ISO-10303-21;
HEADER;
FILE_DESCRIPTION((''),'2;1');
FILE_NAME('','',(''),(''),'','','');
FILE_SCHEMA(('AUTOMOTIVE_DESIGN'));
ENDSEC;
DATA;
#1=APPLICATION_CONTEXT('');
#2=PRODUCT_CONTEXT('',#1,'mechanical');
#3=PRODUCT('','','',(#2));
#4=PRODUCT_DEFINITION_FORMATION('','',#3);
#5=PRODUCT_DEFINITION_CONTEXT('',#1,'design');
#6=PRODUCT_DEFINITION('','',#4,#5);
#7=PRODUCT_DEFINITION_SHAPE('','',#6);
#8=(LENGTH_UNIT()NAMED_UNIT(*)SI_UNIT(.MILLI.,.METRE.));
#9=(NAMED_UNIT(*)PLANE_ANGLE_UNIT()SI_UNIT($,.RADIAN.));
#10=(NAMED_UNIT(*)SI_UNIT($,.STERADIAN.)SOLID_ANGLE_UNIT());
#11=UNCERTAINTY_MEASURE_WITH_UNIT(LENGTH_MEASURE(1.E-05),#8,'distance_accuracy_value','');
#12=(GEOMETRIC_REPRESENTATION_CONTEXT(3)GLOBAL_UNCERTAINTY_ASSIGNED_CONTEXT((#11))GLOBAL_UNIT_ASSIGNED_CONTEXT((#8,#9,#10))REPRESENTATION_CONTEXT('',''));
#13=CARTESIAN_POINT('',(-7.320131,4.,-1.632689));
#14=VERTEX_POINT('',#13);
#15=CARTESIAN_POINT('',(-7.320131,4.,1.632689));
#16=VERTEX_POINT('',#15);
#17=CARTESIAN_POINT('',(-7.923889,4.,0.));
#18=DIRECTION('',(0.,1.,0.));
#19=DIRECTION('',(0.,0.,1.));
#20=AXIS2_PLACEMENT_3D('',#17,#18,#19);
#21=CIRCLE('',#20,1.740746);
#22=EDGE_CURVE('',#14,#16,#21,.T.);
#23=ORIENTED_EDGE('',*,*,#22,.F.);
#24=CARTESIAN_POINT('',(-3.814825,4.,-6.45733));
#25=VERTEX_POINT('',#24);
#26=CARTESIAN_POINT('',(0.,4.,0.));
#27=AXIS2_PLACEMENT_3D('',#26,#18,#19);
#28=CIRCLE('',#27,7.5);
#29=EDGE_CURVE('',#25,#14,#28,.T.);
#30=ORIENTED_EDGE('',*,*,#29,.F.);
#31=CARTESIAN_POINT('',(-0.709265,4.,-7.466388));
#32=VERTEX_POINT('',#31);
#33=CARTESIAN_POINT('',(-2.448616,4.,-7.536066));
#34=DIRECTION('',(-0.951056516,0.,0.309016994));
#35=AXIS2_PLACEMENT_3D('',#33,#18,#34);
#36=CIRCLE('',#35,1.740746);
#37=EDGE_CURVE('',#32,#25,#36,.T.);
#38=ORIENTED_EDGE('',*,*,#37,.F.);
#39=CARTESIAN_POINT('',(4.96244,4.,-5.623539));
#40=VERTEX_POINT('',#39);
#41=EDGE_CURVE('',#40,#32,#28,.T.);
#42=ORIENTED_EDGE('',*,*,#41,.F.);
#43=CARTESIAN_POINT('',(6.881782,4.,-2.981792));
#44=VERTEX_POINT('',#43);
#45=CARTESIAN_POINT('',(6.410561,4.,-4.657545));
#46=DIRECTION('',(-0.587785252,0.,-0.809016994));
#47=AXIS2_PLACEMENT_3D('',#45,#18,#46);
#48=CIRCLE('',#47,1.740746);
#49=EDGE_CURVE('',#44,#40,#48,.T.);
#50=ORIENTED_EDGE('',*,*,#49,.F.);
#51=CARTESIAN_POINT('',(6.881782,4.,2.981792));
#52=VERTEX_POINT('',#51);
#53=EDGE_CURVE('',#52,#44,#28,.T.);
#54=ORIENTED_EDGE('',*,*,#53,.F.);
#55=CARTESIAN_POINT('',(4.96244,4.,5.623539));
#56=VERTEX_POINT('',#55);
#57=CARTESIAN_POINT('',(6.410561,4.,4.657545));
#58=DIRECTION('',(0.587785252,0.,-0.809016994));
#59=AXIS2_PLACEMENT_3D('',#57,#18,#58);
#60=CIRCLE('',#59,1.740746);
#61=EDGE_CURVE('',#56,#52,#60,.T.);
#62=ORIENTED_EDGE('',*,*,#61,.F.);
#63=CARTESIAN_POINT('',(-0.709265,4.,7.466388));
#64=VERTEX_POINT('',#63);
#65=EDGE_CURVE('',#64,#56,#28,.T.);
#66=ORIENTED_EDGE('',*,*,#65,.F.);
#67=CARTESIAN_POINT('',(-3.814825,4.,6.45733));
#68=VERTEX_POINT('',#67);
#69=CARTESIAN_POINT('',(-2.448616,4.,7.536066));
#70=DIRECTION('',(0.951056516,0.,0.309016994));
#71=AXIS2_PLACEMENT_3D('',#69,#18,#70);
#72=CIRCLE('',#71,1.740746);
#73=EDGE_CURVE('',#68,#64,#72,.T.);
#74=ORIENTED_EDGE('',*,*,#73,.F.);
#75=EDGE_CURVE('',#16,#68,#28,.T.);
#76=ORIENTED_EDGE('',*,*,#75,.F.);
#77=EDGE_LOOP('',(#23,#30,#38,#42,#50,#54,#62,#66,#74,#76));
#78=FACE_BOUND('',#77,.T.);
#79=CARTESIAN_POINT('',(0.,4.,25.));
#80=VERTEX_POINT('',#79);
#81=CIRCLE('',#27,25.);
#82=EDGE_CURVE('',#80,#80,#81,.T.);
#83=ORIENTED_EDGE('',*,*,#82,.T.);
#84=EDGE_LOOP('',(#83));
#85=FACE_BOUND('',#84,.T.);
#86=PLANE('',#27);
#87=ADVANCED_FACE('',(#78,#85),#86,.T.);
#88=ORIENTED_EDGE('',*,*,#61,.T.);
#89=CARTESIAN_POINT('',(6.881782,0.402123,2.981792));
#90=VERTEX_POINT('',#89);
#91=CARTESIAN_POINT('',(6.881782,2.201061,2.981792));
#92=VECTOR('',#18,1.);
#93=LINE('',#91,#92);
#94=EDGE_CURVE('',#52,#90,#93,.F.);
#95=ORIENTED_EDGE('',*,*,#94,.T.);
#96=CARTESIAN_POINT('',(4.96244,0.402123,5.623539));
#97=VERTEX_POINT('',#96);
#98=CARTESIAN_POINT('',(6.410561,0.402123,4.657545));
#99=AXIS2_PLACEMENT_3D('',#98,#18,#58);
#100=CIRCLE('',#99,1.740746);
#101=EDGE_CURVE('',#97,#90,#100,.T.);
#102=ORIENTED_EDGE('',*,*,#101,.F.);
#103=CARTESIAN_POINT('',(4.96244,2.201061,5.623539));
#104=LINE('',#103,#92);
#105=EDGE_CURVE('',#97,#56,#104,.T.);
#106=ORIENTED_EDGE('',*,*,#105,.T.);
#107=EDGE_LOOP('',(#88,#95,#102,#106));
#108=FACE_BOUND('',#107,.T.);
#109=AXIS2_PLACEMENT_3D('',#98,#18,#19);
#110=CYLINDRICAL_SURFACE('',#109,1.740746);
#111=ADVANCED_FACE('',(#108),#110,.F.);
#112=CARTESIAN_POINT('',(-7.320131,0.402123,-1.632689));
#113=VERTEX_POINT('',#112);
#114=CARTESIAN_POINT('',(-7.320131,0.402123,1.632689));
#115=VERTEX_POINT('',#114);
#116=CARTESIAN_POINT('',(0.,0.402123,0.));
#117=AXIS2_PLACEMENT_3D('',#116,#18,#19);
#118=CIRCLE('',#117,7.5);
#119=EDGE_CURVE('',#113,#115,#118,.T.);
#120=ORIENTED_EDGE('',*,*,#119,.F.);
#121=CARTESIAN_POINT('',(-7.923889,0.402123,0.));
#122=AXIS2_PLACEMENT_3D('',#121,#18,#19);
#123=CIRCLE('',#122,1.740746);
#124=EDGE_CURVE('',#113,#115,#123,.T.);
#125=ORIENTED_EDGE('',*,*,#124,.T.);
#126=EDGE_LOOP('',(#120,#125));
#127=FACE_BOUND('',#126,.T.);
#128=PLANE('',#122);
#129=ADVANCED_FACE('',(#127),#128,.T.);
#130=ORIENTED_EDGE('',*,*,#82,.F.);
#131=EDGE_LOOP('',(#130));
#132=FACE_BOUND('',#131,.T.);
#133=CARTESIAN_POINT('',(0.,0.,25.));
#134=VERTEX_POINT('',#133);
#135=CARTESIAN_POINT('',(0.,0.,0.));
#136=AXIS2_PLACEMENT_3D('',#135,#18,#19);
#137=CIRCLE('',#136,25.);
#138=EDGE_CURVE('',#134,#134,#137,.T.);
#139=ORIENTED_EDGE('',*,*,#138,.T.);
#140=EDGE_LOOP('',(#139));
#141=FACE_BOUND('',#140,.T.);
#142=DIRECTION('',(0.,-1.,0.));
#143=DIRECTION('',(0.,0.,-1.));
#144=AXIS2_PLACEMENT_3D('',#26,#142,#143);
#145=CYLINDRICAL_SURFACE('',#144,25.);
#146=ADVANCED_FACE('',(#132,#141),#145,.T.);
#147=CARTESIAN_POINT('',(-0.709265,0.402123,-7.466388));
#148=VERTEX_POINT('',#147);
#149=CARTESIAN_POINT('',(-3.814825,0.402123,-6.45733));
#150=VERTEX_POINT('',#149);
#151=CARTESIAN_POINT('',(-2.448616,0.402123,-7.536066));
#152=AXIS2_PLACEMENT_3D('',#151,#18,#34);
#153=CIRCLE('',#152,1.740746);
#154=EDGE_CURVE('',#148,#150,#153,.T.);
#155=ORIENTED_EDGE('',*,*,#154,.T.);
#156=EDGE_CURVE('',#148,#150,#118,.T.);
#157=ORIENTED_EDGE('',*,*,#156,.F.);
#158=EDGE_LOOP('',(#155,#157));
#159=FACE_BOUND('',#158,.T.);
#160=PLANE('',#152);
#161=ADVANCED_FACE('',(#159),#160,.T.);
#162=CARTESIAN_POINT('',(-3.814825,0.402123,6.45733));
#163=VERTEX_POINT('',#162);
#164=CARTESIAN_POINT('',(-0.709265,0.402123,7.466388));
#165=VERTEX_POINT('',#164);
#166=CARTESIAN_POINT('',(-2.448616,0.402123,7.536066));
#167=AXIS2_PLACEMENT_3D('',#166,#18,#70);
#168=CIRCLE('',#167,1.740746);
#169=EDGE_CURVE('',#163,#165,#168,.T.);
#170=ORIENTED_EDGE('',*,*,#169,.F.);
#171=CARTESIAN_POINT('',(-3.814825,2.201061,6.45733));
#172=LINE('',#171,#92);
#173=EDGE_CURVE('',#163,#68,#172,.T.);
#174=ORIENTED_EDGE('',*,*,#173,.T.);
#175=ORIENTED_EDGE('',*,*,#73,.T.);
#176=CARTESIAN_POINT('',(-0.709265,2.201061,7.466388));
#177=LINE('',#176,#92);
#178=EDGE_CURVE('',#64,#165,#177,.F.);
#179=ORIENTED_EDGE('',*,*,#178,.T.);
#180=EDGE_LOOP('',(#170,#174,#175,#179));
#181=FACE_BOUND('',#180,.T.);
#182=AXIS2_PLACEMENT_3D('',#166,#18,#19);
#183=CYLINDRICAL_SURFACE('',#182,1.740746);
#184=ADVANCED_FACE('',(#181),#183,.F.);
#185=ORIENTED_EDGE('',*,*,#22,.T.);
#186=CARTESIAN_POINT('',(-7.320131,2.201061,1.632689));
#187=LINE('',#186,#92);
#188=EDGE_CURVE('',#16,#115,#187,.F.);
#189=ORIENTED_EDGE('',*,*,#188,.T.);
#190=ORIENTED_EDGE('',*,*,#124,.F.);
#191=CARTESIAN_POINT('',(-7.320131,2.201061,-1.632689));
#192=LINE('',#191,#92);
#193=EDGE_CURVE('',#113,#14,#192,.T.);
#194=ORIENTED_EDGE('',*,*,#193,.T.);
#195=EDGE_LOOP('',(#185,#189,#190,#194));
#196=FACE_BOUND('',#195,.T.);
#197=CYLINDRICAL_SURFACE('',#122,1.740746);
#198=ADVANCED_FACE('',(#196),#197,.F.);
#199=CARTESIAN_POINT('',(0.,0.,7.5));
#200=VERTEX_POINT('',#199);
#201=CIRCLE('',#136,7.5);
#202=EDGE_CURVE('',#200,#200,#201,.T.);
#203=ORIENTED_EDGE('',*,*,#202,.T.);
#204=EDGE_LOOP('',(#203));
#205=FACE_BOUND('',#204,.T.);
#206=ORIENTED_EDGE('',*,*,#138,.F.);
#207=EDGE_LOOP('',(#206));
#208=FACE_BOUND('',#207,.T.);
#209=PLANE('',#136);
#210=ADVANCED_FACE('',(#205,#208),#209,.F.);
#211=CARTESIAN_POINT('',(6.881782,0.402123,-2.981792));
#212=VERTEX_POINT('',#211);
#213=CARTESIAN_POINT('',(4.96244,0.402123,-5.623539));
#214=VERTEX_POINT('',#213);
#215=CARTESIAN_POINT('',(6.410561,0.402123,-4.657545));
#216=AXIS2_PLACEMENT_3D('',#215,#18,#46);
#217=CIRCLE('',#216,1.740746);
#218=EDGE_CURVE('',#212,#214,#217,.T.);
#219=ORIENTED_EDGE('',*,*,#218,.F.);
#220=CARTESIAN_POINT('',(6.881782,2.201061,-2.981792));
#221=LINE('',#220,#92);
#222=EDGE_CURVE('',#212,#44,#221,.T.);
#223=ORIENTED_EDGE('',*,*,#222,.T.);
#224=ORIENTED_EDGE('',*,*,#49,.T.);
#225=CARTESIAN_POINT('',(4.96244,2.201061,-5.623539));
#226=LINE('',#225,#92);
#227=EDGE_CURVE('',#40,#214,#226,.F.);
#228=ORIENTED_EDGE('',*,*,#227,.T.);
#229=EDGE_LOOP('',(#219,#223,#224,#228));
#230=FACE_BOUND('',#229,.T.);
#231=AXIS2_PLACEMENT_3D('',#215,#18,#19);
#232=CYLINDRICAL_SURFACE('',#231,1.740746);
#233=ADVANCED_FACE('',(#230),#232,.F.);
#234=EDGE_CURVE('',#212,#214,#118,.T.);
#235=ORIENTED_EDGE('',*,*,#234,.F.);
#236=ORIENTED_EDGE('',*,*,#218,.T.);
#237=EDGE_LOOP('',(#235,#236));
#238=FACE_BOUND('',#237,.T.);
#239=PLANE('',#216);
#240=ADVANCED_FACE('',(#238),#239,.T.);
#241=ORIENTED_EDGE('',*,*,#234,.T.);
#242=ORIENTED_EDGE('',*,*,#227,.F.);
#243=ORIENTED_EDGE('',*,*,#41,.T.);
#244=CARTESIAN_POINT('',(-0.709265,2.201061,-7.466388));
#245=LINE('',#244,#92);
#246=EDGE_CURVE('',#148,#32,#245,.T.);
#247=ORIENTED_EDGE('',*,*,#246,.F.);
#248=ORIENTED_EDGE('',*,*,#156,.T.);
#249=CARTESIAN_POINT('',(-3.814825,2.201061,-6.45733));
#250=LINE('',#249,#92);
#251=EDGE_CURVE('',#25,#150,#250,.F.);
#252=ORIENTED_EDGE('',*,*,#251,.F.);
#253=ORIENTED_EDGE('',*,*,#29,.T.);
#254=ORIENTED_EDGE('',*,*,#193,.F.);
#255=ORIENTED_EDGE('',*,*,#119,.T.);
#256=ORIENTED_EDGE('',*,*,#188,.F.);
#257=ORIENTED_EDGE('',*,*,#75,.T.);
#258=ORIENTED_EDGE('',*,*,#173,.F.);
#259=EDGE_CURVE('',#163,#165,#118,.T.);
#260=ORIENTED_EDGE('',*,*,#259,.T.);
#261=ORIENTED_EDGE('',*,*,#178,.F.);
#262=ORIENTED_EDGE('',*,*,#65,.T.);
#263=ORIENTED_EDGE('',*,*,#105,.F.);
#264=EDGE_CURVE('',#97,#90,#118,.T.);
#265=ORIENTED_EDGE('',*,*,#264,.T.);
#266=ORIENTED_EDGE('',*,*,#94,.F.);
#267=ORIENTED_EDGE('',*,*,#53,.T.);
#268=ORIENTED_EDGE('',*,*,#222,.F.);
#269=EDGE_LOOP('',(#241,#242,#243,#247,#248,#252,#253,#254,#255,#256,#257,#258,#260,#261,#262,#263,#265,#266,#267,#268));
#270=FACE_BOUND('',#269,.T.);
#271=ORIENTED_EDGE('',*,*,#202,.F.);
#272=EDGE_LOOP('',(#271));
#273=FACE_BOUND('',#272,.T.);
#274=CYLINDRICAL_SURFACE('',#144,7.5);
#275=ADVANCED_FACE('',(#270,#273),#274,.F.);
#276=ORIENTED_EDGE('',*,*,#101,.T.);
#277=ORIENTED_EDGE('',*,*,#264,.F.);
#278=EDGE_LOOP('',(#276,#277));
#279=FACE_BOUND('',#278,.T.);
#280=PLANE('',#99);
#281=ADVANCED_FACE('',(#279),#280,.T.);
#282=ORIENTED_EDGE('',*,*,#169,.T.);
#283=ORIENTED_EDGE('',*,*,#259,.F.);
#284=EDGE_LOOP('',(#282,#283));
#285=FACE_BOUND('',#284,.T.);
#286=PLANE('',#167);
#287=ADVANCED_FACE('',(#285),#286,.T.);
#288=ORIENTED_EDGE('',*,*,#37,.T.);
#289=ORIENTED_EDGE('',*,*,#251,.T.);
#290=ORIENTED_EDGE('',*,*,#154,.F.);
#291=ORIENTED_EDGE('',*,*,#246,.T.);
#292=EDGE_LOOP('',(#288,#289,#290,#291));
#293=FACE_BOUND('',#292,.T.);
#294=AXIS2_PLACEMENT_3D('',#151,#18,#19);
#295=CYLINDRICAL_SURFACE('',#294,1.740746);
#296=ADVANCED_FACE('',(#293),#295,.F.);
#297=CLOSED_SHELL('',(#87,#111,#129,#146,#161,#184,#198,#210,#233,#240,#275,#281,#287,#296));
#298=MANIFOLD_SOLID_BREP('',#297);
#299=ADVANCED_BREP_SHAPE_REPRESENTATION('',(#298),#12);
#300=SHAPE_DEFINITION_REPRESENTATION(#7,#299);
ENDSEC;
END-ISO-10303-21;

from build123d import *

# Parameters (mm, degrees)
SKETCH1_R           = 25
BOSS_EXTRUDE1_DEPTH = 4
SKETCH2_R           = 7.5
CUT_EXTRUDE1_DEPTH  = 36.580893749
SKETCH3_R           = 1.7407464
CUT_EXTRUDE2_DEPTH  = 3.597877343
CIRPATTERN1_COUNT   = 5


with BuildPart() as part:
    # Sketch1 → Boss-Extrude1 (new body)
    with BuildSketch(Plane(origin=(0, 0, 0), x_dir=(1, 0, 0), z_dir=(0, 1, 0))):
        Circle(SKETCH1_R)
    extrude(amount=BOSS_EXTRUDE1_DEPTH)

    # Sketch2 → Cut-Extrude1 (cut, through all)
    with BuildSketch(Plane(origin=(0, 0, 0), x_dir=(1, 0, 0), z_dir=(0, 1, 0))):
        Circle(SKETCH2_R)
    extrude(amount=CUT_EXTRUDE1_DEPTH, mode=Mode.SUBTRACT)

    # Sketch3 → Cut-Extrude2 (cut)
    with BuildSketch(Plane(origin=(0, 4, 0), x_dir=(1, 0, 0), z_dir=(0, 1, 0))):
        with Locations((-7.923889063, 0)):
            Circle(SKETCH3_R)
    cut_extrude2 = extrude(amount=-CUT_EXTRUDE2_DEPTH, mode=Mode.SUBTRACT)

    # CirPattern1: Cut-Extrude2 ×5 about axis
    cirpattern1_axis = Axis((0, 0, 0), (0, 1, 0))
    for i in range(1, CIRPATTERN1_COUNT):
        add(cut_extrude2.rotate(cirpattern1_axis, i * 360 / CIRPATTERN1_COUNT), mode=Mode.SUBTRACT)


solid = part.part
